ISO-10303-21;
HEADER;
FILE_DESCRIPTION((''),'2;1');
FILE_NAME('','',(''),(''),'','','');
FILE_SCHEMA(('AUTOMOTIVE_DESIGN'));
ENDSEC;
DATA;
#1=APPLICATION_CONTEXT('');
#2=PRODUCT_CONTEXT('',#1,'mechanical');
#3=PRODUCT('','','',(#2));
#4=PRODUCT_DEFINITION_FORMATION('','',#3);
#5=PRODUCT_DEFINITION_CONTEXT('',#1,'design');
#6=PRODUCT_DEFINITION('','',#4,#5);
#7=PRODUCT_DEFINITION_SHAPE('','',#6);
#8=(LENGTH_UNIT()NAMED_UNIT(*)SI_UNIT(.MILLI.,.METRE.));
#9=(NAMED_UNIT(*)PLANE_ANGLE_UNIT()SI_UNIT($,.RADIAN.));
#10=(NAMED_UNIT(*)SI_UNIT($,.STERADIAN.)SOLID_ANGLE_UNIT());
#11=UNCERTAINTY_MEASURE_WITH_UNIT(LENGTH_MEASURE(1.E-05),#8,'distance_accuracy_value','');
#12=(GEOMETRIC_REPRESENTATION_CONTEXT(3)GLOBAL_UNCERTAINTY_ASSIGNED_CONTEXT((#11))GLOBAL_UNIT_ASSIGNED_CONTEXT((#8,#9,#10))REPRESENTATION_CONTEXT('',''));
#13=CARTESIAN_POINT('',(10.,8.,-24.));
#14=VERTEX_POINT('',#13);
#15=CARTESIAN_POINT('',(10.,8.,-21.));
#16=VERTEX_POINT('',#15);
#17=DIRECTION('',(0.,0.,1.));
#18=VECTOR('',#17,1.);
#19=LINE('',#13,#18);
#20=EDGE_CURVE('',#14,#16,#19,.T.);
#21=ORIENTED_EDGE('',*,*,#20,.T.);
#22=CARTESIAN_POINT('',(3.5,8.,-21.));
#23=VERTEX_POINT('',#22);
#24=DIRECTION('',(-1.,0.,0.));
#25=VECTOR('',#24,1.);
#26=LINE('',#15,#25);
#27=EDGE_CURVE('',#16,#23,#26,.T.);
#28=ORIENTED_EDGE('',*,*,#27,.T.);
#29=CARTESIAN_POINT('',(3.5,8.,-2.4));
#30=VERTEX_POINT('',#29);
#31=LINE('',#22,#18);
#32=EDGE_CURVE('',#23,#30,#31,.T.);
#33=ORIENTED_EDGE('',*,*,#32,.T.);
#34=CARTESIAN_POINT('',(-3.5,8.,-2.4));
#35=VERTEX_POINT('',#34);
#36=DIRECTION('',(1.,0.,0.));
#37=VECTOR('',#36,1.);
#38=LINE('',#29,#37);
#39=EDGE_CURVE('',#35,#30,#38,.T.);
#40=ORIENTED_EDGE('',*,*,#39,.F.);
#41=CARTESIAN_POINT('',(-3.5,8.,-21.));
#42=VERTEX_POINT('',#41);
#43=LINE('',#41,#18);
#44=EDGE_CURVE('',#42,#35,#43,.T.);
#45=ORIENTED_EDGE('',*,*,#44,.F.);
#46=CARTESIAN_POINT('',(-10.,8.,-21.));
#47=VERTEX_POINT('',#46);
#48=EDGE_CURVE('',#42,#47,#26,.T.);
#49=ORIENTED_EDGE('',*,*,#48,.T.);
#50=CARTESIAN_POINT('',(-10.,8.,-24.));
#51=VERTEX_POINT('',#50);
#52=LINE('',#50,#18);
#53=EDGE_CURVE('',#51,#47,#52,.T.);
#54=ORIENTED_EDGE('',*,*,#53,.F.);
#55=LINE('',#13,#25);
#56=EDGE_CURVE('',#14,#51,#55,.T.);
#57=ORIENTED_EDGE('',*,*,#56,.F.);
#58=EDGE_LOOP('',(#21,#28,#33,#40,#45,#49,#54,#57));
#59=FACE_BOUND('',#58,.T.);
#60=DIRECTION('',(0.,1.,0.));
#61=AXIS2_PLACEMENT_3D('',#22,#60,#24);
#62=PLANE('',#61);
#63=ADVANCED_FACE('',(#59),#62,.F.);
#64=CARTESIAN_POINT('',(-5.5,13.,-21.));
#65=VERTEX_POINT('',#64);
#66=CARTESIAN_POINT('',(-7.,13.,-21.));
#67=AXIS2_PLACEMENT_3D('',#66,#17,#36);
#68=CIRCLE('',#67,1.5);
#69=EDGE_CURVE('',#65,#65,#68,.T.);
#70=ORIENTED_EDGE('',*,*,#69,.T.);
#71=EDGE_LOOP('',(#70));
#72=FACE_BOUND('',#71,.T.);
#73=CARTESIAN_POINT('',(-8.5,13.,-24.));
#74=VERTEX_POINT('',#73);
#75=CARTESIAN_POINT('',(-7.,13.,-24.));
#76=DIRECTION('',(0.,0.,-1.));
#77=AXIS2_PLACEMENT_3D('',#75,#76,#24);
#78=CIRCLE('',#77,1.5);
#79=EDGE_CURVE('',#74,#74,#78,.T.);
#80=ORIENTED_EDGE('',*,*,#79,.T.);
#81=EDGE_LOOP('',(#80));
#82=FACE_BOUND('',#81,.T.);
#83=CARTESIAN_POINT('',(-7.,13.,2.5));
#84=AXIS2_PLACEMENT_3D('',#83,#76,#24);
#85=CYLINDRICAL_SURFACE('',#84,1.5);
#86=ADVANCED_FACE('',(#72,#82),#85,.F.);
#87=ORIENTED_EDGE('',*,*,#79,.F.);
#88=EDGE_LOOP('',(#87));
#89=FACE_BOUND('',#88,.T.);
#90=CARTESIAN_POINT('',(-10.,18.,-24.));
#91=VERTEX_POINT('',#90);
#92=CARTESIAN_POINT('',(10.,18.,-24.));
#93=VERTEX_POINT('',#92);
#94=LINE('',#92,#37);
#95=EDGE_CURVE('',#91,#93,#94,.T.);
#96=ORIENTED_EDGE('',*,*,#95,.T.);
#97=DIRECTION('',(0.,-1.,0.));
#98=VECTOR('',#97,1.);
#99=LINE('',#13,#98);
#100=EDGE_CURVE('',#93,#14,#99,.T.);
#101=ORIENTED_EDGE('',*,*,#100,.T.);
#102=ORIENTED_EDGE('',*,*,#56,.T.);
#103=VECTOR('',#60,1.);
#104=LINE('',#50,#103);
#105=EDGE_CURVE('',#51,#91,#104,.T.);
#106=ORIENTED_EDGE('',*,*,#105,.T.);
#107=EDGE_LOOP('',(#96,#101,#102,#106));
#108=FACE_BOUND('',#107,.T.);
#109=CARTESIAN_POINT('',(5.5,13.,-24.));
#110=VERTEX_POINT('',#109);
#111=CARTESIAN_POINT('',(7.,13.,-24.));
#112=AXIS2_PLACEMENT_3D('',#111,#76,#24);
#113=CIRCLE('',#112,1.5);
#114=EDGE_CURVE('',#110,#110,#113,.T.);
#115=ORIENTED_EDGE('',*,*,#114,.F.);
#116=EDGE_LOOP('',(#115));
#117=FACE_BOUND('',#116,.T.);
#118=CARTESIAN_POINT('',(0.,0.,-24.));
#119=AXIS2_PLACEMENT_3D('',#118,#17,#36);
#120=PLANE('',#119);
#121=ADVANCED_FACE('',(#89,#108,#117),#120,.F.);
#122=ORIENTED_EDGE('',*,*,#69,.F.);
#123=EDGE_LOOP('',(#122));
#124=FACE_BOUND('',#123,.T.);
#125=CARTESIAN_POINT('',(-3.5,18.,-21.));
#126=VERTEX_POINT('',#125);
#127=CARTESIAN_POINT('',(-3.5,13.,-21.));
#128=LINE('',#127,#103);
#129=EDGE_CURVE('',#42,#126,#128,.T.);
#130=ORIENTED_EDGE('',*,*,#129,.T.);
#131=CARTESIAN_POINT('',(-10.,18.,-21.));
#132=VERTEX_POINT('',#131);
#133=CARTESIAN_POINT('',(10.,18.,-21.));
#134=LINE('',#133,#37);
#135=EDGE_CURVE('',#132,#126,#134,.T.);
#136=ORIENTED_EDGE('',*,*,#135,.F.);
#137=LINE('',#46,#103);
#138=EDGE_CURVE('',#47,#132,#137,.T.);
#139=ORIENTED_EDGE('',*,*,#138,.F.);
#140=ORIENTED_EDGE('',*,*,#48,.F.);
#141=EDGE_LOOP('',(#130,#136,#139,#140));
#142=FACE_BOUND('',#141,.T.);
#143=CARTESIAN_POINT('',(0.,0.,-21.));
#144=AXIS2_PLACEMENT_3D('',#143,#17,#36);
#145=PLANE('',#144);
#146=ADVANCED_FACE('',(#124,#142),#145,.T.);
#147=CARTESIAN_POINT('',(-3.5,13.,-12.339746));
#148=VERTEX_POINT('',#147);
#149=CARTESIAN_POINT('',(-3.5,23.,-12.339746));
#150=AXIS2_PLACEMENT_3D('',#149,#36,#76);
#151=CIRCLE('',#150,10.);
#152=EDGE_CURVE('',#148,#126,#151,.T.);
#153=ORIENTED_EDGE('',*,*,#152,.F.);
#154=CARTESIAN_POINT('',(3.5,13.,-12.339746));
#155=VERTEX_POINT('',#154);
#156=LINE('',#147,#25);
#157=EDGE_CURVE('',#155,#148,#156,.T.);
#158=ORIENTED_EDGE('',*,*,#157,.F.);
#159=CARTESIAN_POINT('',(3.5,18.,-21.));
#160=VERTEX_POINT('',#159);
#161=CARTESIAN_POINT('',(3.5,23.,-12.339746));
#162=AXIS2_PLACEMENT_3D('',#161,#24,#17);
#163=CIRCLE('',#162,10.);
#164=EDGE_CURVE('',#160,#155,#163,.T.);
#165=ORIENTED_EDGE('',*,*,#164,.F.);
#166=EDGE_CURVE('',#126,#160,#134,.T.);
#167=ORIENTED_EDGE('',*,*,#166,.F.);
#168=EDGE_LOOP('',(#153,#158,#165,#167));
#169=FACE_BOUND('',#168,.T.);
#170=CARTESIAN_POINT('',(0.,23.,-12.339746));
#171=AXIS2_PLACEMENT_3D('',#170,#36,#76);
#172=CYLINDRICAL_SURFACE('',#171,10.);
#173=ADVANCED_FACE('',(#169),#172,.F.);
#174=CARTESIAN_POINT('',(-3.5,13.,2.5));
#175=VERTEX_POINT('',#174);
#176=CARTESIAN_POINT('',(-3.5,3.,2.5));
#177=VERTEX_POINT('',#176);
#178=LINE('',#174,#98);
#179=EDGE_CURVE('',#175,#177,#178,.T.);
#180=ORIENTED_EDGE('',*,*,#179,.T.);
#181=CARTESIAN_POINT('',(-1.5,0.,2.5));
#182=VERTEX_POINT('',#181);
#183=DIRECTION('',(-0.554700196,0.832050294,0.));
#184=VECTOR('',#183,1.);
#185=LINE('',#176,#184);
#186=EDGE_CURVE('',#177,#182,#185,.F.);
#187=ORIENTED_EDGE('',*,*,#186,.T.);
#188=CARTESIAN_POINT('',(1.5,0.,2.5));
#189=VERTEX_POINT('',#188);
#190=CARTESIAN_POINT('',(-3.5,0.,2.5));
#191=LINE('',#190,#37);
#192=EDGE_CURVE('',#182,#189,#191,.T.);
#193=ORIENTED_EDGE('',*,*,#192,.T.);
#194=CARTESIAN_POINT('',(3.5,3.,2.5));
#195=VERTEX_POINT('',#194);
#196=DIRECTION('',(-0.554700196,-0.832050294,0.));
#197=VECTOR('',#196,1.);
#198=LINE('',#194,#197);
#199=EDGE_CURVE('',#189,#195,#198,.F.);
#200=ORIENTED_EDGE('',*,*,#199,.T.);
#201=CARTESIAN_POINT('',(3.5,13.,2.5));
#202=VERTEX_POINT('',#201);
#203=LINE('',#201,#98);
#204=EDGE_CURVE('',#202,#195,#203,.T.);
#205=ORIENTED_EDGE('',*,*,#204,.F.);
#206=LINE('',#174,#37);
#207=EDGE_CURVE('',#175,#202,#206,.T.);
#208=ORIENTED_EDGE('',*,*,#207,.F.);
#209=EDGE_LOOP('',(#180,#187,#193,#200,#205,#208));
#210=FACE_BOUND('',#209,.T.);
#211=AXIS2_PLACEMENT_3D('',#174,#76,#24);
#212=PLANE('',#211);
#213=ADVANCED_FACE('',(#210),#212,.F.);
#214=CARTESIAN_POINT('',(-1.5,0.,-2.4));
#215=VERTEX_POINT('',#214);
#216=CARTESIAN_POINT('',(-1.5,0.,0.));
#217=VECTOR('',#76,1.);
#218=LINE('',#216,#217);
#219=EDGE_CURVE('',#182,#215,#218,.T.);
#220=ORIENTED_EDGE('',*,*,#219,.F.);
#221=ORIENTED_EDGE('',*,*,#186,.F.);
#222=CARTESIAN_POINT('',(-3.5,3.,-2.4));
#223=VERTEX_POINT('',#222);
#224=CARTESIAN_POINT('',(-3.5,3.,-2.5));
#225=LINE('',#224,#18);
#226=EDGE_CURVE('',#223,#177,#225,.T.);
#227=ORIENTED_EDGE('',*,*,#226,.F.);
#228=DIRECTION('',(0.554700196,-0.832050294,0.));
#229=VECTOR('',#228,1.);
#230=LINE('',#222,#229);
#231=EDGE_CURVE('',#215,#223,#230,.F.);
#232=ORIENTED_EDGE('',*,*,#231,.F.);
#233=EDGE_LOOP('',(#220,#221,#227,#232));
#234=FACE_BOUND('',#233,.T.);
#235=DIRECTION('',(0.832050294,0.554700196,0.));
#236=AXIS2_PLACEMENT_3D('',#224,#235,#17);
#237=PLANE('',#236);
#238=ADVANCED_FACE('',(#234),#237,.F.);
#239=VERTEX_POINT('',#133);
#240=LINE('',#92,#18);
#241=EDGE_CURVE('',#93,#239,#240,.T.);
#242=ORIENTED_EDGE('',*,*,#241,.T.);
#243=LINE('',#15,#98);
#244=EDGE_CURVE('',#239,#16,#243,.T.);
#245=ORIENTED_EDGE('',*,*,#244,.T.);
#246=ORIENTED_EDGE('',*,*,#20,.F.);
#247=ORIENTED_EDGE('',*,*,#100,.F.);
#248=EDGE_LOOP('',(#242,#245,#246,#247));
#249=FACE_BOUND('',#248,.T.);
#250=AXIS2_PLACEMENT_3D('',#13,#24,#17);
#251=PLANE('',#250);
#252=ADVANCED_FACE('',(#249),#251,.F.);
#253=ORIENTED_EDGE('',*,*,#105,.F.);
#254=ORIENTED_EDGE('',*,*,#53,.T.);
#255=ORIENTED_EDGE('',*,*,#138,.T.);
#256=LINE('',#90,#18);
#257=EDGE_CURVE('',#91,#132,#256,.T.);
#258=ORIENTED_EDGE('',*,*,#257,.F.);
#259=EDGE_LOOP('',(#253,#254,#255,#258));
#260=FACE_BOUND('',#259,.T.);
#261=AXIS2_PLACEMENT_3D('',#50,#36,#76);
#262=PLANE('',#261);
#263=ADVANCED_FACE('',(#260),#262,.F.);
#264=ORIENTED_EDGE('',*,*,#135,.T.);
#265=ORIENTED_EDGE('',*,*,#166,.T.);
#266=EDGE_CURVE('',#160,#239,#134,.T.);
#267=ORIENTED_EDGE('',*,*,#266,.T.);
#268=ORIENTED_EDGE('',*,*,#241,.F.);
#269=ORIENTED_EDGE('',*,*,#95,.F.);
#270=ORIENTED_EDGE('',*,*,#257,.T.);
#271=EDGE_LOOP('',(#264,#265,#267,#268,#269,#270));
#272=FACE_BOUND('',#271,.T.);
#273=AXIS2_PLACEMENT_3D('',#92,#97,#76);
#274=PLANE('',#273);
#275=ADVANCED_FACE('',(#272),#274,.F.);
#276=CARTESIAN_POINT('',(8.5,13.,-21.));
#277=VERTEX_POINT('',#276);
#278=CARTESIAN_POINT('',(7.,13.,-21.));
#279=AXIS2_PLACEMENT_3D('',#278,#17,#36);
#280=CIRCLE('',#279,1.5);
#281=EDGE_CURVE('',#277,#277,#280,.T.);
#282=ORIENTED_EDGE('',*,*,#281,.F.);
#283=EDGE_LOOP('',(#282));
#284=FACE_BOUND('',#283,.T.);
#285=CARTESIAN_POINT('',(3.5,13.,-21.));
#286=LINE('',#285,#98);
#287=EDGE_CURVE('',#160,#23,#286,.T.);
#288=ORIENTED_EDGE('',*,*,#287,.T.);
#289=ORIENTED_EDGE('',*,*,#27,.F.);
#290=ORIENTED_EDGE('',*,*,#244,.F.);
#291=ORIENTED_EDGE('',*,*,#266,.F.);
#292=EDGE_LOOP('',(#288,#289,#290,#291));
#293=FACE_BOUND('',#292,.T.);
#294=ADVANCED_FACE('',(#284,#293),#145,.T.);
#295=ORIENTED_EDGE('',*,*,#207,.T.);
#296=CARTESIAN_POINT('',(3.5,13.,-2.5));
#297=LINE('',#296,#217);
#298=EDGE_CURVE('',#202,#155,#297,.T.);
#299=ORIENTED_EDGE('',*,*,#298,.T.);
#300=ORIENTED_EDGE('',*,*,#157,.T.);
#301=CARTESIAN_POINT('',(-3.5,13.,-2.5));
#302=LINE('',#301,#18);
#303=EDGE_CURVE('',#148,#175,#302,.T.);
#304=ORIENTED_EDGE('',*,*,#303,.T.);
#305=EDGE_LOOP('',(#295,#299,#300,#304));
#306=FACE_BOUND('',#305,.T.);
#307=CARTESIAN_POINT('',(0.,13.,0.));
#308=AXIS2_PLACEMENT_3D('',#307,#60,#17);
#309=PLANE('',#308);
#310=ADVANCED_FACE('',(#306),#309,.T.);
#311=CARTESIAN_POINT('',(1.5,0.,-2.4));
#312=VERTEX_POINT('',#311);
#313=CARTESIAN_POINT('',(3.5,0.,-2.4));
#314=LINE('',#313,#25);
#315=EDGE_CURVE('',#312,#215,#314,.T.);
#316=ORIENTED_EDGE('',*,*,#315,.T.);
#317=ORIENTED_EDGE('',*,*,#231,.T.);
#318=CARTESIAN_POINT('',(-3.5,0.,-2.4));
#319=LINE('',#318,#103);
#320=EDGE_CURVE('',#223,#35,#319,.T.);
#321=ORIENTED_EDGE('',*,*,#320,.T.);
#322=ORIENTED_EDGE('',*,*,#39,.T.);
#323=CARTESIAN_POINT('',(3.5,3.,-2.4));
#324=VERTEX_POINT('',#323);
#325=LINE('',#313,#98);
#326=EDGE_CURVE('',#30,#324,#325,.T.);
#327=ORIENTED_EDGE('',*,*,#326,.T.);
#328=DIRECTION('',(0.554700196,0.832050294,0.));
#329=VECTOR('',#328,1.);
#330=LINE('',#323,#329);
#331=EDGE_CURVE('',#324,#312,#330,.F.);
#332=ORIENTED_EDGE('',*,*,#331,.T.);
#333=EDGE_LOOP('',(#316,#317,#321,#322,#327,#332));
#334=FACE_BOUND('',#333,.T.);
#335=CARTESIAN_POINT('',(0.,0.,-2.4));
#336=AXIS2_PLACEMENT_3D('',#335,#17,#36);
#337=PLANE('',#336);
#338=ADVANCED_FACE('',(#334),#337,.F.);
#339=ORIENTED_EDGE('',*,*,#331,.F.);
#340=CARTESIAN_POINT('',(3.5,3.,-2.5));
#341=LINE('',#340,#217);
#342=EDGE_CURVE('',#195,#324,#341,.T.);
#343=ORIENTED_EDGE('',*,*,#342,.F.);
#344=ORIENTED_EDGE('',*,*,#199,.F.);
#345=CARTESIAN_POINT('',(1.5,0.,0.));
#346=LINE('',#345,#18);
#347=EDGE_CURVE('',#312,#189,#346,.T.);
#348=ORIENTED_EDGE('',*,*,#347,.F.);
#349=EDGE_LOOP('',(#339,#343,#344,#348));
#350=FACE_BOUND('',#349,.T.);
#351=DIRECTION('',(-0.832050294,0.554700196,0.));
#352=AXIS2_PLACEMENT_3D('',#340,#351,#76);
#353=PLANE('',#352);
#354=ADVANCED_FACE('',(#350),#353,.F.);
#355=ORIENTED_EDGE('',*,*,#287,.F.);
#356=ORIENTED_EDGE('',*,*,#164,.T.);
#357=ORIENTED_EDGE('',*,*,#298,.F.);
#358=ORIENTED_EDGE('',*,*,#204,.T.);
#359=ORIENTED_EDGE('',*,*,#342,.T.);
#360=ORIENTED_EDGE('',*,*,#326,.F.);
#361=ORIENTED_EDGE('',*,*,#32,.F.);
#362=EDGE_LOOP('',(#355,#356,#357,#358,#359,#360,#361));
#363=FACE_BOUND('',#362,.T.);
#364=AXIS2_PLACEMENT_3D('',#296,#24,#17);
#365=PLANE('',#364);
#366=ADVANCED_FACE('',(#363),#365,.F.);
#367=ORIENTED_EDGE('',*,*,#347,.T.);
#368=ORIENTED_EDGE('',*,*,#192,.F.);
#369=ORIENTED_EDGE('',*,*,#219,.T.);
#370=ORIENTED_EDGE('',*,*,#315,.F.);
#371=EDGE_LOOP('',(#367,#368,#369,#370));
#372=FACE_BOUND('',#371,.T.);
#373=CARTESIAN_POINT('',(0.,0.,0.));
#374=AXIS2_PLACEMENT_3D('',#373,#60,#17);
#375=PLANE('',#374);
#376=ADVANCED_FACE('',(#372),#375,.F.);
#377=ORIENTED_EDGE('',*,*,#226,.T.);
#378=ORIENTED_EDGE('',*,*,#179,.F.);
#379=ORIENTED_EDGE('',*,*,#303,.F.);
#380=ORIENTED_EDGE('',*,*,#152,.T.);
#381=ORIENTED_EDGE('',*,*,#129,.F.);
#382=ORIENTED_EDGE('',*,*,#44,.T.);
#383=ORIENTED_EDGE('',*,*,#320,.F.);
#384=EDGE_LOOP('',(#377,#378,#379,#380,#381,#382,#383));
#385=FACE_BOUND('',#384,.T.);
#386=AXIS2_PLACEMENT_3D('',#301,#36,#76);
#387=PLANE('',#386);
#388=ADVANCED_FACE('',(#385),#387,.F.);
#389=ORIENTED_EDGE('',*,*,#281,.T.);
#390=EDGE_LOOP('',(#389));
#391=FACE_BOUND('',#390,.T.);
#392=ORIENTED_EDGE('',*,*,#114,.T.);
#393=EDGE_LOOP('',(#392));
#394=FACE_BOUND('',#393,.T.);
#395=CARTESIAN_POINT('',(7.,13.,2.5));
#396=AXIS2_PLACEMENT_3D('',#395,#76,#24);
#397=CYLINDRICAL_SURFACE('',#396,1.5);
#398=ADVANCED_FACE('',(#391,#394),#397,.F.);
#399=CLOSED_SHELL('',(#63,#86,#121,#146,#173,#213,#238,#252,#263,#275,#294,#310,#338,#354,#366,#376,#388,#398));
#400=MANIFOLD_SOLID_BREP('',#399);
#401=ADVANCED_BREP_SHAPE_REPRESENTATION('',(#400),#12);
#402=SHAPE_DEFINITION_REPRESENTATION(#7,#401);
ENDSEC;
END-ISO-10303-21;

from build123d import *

# Parameters (mm, degrees)
SKETCH_1_W          = 7
SKETCH_1_H          = 5
EXTRUDE_1_DEPTH     = 13
SKETCH_2_W          = 7
SKETCH_2_H          = 5
EXTRUDE_2_DEPTH     = 18.5
SKETCH_4_W          = 20
SKETCH_4_H          = 10
EXTRUDE_3_DEPTH     = 3
SKETCH_5_R          = 1.5
CUT_EXTRUDE_1_DEPTH = 34.559648389
FILLET_1_R          = 10
SKETCH_6_W          = 7
SKETCH_6_H          = 8
CUT_EXTRUDE_2_DEPTH = 0.1
CHAMFER_3_SIZE      = 2
CHAMFER_3_SIZE2     = 3


with BuildPart() as part:
    # 草图1 → 凸台-拉伸1 (new body)
    with BuildSketch(Plane(origin=(0, 0, 0), x_dir=(1, 0, 0), z_dir=(0, 1, 0))):
        Rectangle(SKETCH_1_W, SKETCH_1_H)
    extrude(amount=EXTRUDE_1_DEPTH)

    # 草图2 → 凸台-拉伸2 (add)
    with BuildSketch(Plane(origin=(0, 0, -2.5), x_dir=(-1, 0, 0), z_dir=(0, 0, -1))):
        with Locations((0, 10.5)):
            Rectangle(SKETCH_2_W, SKETCH_2_H)
    extrude(amount=EXTRUDE_2_DEPTH)

    # 草图4 → 凸台-拉伸3 (add)
    with BuildSketch(Plane(origin=(0, 0, -21), x_dir=(-1, 0, 0), z_dir=(0, 0, -1))):
        with Locations((0, 13)):
            Rectangle(SKETCH_4_W, SKETCH_4_H)
    extrude(amount=EXTRUDE_3_DEPTH)

    # 草图5 → 切除-拉伸1 (cut, through all)
    with BuildSketch(Plane(origin=(0, 0, -24), x_dir=(-1, 0, 0), z_dir=(0, 0, -1))):
        with Locations((-7, 13)):
            Circle(SKETCH_5_R)
        with Locations((7, 13)):
            Circle(SKETCH_5_R)
    extrude(amount=-CUT_EXTRUDE_1_DEPTH, mode=Mode.SUBTRACT)

    # 圆角1
    # the kernel refuses this fillet: 10 mm, written as the material it adds along each edge
    with BuildSketch(Plane(origin=(3.5, 13, -21), x_dir=(0, 1, 0), z_dir=(-1, 0, 0))) as fillet_1_piece_1:
        with BuildLine():
            CenterArc((10, -8.660254038), FILLET_1_R, 120, 60)
            Line((0, -8.660254038), (-0.2, -8.660254038))
            Line((-0.2, -8.660254038), (-0.2, 0))
            Line((-0.2, 0), (0, 0.2))
            ThreePointArc((0, 0.2), (2.5, 0.2), (4.9, 0.173205081))
            Line((4.9, 0.173205081), (5, 0))
        make_face()
    extrude(amount=7)

    # 草图6 → 切除-拉伸2 (cut)
    with BuildSketch(Plane(origin=(0, 0, -2.5), x_dir=(-1, 0, 0), z_dir=(0, 0, -1))):
        with Locations((0, 4)):
            Rectangle(SKETCH_6_W, SKETCH_6_H)
    extrude(amount=-CUT_EXTRUDE_2_DEPTH, mode=Mode.SUBTRACT)

    # 倒角3
    chamfer_3_edges = [part.edges().sort_by_distance(p)[0] for p in [
        (3.5, 0, 0.05),
        (-3.5, 0, 0.05),
    ]]
    chamfer_3_side = [part.faces().sort_by_distance(p)[0] for p in [
        (0, 0, 0.05),
    ]]
    chamfer(chamfer_3_edges, length=CHAMFER_3_SIZE, length2=CHAMFER_3_SIZE2, reference=chamfer_3_side[0])


solid = part.part
